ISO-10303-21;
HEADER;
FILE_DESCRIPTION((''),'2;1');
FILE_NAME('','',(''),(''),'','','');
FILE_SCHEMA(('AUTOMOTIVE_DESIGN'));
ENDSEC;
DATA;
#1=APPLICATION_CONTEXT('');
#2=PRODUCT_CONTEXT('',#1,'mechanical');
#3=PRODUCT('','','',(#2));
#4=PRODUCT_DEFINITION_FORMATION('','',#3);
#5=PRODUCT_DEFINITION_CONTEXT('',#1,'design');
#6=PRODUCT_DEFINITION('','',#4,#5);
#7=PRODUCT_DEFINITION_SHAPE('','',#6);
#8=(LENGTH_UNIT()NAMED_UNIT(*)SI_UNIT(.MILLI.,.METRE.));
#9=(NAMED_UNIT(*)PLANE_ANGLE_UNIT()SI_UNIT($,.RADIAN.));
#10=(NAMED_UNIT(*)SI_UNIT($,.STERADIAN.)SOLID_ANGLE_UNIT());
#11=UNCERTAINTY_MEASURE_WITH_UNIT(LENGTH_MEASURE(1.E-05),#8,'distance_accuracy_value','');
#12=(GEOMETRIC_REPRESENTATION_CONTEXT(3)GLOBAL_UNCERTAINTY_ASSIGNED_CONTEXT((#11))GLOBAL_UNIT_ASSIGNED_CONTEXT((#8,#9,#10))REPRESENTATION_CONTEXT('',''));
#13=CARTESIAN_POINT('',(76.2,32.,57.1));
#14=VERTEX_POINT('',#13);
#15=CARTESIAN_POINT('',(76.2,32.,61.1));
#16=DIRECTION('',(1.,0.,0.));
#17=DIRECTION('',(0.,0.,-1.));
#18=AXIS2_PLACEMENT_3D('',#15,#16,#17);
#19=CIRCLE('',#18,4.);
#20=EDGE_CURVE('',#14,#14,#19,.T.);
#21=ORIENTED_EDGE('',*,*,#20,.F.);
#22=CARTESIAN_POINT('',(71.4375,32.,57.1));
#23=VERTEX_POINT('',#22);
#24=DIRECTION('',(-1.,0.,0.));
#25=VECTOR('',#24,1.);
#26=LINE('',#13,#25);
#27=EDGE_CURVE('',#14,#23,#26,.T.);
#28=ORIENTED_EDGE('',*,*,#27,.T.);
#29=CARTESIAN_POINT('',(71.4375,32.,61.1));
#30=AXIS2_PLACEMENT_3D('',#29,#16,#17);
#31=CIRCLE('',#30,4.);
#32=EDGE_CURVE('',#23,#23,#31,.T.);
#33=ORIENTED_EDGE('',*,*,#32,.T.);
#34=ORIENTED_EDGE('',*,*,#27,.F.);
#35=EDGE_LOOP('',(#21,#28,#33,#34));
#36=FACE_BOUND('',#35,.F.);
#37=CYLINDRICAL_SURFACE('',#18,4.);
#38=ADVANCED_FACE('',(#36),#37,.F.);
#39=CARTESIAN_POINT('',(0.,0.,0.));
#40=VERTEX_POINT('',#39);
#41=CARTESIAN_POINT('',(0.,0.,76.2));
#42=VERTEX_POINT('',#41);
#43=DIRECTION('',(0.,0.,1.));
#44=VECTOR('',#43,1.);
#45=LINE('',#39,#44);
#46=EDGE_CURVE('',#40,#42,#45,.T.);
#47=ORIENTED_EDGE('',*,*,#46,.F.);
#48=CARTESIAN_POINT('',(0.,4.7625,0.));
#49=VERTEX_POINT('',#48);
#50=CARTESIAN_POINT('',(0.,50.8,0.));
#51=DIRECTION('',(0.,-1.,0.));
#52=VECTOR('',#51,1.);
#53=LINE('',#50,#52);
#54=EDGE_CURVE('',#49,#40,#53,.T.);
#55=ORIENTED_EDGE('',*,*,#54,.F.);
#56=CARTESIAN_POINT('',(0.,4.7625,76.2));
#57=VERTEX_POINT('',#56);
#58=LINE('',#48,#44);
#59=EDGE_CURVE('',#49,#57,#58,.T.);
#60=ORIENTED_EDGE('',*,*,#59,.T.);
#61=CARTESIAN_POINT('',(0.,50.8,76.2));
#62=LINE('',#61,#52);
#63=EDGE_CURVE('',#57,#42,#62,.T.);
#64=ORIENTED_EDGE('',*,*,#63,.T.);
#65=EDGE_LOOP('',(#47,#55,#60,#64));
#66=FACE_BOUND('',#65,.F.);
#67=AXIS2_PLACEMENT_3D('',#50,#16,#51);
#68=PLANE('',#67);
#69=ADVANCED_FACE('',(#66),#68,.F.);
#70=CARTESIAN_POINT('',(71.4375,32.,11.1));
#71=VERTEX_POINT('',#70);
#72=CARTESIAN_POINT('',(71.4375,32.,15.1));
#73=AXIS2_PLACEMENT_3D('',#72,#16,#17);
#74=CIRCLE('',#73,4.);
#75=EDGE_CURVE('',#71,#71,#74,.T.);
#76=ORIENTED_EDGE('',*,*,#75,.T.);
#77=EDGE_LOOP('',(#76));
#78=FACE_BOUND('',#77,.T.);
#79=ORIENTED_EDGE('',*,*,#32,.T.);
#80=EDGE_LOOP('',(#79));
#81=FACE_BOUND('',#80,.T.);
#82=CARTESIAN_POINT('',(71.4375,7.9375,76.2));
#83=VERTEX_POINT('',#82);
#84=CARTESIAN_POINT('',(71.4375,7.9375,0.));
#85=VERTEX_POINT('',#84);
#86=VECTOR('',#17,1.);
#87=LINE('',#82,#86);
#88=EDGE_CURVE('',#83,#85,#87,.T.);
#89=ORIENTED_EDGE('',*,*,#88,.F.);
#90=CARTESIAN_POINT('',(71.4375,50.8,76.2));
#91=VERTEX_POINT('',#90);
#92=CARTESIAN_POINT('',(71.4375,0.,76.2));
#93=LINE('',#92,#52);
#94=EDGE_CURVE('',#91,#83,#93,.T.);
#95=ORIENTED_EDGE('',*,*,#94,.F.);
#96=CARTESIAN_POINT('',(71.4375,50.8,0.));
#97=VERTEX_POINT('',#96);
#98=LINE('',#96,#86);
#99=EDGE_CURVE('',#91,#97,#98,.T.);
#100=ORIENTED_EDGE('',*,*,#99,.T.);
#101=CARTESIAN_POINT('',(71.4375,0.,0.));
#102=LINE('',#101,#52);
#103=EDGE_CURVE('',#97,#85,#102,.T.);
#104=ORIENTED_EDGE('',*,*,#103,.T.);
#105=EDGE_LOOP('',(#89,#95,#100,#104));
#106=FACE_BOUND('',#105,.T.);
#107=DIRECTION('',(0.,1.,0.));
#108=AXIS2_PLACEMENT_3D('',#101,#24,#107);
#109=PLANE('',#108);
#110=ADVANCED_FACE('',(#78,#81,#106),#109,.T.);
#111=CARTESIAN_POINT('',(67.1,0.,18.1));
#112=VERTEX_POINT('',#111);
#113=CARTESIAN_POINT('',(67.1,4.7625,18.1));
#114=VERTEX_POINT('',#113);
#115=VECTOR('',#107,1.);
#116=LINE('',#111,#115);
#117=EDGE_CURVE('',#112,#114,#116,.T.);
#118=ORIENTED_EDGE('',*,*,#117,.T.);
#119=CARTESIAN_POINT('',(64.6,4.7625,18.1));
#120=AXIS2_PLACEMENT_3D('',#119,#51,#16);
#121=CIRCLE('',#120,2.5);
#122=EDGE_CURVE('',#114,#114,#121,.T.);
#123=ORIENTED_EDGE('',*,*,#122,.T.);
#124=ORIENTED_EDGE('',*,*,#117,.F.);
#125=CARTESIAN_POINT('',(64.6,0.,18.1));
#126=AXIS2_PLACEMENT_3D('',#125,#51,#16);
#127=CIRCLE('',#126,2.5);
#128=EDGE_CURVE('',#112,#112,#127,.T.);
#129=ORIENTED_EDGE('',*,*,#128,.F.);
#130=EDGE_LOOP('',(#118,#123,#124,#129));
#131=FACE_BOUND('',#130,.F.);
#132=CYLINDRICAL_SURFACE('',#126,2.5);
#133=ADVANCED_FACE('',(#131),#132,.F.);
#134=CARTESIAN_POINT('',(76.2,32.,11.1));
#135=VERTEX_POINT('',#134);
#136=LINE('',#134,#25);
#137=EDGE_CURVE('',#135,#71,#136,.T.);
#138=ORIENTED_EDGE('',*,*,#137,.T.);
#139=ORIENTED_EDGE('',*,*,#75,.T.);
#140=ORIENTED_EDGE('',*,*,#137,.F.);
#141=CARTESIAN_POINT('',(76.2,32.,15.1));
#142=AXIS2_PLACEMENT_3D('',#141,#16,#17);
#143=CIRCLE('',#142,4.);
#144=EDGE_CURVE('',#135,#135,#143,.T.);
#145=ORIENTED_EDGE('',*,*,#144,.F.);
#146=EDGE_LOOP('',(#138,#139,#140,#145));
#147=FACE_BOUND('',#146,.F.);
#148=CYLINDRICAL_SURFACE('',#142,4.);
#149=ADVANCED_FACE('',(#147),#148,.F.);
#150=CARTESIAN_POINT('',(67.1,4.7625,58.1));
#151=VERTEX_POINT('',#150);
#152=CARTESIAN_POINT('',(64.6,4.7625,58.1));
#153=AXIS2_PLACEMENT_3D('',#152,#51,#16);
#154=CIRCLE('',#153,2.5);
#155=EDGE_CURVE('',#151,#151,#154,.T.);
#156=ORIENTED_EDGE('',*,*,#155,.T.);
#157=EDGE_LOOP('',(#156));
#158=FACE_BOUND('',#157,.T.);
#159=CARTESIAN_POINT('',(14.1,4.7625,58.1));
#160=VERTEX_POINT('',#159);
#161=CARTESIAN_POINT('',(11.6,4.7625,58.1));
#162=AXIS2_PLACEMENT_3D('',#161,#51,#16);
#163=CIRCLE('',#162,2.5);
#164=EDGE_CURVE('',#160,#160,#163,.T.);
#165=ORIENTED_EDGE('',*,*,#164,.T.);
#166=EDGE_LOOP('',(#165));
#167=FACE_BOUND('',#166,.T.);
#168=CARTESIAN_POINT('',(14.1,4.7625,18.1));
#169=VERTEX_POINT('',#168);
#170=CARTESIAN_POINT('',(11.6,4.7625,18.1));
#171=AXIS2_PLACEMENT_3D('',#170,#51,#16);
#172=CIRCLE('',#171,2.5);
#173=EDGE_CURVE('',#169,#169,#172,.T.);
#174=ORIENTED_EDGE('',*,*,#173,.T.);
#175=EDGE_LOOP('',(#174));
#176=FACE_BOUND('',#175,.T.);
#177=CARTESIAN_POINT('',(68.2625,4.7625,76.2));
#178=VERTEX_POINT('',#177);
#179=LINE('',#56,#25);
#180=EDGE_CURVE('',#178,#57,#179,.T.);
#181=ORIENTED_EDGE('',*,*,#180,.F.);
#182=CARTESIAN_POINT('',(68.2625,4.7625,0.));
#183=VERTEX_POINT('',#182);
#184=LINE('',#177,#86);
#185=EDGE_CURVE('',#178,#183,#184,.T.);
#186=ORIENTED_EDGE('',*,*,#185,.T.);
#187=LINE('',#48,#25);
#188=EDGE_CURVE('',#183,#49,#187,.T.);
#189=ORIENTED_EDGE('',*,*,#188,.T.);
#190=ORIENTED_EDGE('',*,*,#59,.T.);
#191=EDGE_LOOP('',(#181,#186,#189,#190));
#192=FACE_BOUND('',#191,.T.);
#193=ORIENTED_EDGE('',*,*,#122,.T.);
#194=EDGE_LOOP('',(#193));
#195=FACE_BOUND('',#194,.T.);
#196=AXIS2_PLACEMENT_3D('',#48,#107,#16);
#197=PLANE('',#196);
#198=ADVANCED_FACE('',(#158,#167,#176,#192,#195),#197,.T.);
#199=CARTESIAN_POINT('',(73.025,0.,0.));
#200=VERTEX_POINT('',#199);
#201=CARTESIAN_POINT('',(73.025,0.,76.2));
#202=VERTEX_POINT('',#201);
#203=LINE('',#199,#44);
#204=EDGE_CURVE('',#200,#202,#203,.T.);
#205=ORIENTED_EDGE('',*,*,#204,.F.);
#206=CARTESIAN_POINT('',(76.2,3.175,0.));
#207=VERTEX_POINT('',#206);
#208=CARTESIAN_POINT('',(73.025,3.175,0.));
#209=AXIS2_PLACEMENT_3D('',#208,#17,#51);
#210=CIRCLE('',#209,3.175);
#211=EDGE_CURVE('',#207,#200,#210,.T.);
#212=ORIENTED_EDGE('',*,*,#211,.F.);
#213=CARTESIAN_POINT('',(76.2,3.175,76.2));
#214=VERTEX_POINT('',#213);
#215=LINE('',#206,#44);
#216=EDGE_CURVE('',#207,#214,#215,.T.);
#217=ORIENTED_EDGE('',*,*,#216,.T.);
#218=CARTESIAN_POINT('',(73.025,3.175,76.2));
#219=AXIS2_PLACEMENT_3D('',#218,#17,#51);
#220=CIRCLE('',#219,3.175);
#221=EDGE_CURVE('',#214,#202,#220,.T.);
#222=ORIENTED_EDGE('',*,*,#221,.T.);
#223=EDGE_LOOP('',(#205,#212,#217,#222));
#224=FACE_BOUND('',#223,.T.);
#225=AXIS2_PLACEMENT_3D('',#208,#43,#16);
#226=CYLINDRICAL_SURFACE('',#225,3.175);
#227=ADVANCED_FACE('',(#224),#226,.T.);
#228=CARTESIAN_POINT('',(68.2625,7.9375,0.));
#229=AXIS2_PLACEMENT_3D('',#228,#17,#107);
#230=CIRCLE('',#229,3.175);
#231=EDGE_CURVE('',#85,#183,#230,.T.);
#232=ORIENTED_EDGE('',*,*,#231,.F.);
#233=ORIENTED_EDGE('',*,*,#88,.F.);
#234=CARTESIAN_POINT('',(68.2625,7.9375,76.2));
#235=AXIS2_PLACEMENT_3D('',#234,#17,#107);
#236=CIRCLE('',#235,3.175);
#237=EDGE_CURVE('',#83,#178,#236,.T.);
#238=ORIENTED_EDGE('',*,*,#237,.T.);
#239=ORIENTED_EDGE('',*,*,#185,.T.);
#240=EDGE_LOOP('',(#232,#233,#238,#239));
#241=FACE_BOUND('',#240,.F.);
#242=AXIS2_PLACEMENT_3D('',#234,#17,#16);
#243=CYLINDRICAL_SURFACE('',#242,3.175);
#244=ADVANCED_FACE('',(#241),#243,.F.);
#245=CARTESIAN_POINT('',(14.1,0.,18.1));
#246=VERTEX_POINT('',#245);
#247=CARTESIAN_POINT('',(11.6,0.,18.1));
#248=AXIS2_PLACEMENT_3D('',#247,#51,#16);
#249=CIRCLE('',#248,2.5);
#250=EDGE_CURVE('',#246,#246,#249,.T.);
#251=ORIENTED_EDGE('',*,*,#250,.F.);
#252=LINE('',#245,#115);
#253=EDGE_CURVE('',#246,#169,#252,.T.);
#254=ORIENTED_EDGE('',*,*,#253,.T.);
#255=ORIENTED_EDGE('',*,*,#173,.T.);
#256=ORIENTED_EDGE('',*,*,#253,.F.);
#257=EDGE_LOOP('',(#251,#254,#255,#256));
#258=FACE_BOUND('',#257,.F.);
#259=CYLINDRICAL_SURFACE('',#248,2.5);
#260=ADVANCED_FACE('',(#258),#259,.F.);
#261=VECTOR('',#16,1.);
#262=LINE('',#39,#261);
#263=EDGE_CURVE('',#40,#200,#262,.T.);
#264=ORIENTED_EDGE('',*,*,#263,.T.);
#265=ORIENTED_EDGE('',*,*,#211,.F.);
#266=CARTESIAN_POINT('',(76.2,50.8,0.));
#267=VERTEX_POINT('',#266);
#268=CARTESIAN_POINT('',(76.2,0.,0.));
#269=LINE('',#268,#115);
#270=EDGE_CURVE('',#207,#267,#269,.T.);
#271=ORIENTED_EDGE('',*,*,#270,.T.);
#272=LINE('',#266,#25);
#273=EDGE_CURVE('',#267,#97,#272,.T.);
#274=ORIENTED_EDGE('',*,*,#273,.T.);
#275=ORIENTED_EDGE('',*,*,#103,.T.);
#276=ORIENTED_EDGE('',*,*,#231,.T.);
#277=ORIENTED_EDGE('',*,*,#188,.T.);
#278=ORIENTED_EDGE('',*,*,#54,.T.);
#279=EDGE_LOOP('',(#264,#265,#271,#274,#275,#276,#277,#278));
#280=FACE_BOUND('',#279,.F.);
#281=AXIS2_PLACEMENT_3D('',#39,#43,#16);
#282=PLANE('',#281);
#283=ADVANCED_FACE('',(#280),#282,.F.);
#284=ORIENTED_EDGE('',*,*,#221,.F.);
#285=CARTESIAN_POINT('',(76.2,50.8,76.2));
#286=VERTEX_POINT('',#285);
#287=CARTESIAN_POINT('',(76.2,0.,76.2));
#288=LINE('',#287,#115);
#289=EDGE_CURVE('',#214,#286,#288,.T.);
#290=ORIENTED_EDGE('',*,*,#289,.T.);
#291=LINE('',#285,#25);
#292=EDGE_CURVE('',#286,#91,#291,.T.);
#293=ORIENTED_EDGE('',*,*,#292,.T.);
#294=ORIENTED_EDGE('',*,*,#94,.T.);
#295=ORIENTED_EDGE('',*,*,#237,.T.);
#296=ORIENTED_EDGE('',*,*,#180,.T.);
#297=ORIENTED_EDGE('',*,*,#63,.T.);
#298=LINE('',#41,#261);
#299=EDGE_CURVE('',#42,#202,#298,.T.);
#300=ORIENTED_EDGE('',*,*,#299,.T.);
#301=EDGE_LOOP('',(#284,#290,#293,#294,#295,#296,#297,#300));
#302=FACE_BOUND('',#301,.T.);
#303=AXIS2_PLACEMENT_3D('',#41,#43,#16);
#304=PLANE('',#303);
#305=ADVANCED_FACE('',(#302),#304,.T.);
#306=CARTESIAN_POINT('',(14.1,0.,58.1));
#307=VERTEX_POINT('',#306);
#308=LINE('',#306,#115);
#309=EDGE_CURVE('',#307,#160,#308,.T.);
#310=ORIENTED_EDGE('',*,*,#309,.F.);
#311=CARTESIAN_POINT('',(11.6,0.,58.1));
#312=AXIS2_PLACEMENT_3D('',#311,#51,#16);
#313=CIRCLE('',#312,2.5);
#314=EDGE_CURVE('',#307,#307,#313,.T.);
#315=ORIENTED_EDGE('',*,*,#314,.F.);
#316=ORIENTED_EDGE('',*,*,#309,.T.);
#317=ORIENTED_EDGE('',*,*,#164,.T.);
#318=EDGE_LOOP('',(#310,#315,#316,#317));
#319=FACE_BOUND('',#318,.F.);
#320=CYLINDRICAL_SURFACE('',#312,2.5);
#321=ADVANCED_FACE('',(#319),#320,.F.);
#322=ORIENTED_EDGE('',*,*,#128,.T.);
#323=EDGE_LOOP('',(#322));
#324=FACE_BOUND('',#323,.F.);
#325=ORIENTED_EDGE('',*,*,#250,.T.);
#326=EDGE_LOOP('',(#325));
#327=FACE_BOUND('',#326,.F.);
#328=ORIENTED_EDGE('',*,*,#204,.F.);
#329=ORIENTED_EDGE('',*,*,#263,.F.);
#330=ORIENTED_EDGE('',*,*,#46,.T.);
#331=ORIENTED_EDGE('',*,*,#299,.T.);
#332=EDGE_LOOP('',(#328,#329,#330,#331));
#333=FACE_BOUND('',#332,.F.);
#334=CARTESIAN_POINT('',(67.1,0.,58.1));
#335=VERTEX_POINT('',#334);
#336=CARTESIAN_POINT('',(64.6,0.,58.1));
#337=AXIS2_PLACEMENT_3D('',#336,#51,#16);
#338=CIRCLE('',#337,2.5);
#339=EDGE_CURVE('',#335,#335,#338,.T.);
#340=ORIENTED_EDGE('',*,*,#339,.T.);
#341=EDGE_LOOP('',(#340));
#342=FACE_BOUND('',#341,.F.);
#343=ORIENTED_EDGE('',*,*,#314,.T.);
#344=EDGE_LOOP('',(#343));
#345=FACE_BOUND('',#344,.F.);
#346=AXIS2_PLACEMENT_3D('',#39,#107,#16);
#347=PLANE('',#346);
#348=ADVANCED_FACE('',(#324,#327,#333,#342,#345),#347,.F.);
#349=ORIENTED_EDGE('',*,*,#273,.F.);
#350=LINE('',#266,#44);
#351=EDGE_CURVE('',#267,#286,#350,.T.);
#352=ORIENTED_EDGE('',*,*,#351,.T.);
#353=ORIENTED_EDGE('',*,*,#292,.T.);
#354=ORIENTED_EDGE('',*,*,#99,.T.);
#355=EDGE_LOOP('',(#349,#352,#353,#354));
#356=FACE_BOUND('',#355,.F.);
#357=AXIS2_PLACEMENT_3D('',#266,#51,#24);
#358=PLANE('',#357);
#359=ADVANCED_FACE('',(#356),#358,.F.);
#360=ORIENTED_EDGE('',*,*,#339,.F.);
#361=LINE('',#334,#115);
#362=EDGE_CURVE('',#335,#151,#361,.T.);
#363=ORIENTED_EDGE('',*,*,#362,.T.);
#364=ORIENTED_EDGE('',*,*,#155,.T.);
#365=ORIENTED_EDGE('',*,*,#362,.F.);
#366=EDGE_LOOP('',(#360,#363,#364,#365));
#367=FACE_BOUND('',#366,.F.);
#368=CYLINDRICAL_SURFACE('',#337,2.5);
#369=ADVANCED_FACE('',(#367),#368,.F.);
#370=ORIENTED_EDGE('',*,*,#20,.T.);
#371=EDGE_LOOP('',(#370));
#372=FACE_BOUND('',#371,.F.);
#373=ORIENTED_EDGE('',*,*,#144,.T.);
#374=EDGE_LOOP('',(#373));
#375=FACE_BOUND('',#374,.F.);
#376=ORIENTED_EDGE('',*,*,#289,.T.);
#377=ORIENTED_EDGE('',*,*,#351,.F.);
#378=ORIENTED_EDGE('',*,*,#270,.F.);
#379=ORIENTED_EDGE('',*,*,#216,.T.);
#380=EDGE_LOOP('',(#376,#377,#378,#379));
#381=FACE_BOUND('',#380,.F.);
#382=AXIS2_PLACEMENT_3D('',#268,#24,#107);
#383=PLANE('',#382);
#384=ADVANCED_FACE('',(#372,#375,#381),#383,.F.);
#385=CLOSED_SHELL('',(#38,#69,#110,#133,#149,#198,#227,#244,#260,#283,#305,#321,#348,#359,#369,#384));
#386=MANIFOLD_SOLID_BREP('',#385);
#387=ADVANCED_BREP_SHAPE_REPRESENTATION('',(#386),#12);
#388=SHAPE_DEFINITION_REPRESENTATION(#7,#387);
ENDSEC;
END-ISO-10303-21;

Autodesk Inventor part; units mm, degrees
ref_plane "YZ Plane" through (0, 0, 0) normal (1, 0, 0) x (0, 1, 0)
ref_plane "XZ Plane" through (0, 0, 0) normal (0, 1, 0) x (-1, 0, 0)
ref_plane "XY Plane" through (0, 0, 0) normal (0, 0, 1) x (1, 0, 0)
sketch "Sketch1" plane through (0, 0, 0) normal (0, 0, 1) x (1, 0, 0)
  line L0 (0, 0) -> (76.2, 0)
  line L1 (76.2, 0) -> (76.2, 50.8)
  line L2 (76.2, 50.8) -> (0, 50.8)
  line L3 (0, 50.8) -> (0, 0)
  dimension "d0" = 76.2
  dimension "d1" = 50.8
extrude "Extrusion1" add sketch "Sketch1" along normal blind 76.2
shell "Shell1" thickness 4.7625 removed faces 4 at (50.8, 16.9333, 76.2) at (50.8, 50.8, 25.4) at (50.8, 16.9333, 0) at (0, 33.8667, 25.4)
sketch "Sketch3" plane through (0, 0, 0) normal (0, -1, 0) x (1, 0, 0)
  line L0 (64.6, 58.1) -> (11.6, 58.1) construction
  line L1 (11.6, 58.1) -> (11.6, 18.1) construction
  line L2 (11.6, 18.1) -> (64.6, 18.1) construction
  line L3 (64.6, 18.1) -> (64.6, 58.1) construction
  circle A0 centre (64.6, 18.1) radius 2.5
  circle A1 centre (64.6, 58.1) radius 2.5
  circle A2 centre (11.6, 58.1) radius 2.5
  circle A3 centre (11.6, 18.1) radius 2.5
  line L4 (76.2, 0) -> (76.2, 76.2) construction
  line L5 (0, 76.2) -> (76.2, 76.2) construction
  point P0 (0, 0)
  point P1 (64.6, 38.1)
  point P2 (76.2, 38.1)
  point P3 (38.1, 58.1)
  point P4 (38.1, 76.2)
  dimension "d6" = 40
  dimension "d7" = 53
  dimension "d8" = 5
  dimension "d16" = 0
extrude "Extrusion2" cut sketch "Sketch3" against normal blind 76.2
sketch "Sketch4" plane through (76.2, 0, 0) normal (1, 0, 0) x (0, 0, -1)
  circle A0 centre (-61.1, 32) radius 4
  circle A1 centre (-15.1, 32) radius 4
  line L0 (-61.1, 32) -> (-15.1, 32) construction
  line L1 (0, 0) -> (0, 50.8) construction
  line L2 (0, 50.8) -> (-76.2, 50.8) construction
  line L3 (-76.2, 0) -> (-76.2, 50.8) construction
  line L4 (0, 0) -> (-76.2, 0) construction
  point P0 (-38.1, 32)
  point P1 (0, 25.4)
  point P2 (-38.1, 50.8)
  dimension "d11" = 46
  dimension "d12" = 8
  dimension "d15" = 32
extrude "Extrusion3" cut sketch "Sketch4" against normal blind 76.2
fillet "Fillet1" radius 3.175 2 edges at (76.2, 0, 38.1) (71.4375, 4.7625, 38.1)
equation "\"BendRadius\" = Thickness"
equation "\"BendReliefWidth\" = Thickness"
equation "\"BendReliefDepth\" = 0.5 * Thickness"
equation "\"CornerReliefSize\" = 4 * Thickness"
equation "\"MinimumRemnant\" = 2 * Thickness"
equation "\"TransitionRadius\" = BendRadius"
equation "\"JacobiRadiusSize\" = BendRadius"
equation "\"GapSize\" = Thickness"
equation "\"Thickness\" = 3.048"
properties part number "2x3_L_Bracket"
